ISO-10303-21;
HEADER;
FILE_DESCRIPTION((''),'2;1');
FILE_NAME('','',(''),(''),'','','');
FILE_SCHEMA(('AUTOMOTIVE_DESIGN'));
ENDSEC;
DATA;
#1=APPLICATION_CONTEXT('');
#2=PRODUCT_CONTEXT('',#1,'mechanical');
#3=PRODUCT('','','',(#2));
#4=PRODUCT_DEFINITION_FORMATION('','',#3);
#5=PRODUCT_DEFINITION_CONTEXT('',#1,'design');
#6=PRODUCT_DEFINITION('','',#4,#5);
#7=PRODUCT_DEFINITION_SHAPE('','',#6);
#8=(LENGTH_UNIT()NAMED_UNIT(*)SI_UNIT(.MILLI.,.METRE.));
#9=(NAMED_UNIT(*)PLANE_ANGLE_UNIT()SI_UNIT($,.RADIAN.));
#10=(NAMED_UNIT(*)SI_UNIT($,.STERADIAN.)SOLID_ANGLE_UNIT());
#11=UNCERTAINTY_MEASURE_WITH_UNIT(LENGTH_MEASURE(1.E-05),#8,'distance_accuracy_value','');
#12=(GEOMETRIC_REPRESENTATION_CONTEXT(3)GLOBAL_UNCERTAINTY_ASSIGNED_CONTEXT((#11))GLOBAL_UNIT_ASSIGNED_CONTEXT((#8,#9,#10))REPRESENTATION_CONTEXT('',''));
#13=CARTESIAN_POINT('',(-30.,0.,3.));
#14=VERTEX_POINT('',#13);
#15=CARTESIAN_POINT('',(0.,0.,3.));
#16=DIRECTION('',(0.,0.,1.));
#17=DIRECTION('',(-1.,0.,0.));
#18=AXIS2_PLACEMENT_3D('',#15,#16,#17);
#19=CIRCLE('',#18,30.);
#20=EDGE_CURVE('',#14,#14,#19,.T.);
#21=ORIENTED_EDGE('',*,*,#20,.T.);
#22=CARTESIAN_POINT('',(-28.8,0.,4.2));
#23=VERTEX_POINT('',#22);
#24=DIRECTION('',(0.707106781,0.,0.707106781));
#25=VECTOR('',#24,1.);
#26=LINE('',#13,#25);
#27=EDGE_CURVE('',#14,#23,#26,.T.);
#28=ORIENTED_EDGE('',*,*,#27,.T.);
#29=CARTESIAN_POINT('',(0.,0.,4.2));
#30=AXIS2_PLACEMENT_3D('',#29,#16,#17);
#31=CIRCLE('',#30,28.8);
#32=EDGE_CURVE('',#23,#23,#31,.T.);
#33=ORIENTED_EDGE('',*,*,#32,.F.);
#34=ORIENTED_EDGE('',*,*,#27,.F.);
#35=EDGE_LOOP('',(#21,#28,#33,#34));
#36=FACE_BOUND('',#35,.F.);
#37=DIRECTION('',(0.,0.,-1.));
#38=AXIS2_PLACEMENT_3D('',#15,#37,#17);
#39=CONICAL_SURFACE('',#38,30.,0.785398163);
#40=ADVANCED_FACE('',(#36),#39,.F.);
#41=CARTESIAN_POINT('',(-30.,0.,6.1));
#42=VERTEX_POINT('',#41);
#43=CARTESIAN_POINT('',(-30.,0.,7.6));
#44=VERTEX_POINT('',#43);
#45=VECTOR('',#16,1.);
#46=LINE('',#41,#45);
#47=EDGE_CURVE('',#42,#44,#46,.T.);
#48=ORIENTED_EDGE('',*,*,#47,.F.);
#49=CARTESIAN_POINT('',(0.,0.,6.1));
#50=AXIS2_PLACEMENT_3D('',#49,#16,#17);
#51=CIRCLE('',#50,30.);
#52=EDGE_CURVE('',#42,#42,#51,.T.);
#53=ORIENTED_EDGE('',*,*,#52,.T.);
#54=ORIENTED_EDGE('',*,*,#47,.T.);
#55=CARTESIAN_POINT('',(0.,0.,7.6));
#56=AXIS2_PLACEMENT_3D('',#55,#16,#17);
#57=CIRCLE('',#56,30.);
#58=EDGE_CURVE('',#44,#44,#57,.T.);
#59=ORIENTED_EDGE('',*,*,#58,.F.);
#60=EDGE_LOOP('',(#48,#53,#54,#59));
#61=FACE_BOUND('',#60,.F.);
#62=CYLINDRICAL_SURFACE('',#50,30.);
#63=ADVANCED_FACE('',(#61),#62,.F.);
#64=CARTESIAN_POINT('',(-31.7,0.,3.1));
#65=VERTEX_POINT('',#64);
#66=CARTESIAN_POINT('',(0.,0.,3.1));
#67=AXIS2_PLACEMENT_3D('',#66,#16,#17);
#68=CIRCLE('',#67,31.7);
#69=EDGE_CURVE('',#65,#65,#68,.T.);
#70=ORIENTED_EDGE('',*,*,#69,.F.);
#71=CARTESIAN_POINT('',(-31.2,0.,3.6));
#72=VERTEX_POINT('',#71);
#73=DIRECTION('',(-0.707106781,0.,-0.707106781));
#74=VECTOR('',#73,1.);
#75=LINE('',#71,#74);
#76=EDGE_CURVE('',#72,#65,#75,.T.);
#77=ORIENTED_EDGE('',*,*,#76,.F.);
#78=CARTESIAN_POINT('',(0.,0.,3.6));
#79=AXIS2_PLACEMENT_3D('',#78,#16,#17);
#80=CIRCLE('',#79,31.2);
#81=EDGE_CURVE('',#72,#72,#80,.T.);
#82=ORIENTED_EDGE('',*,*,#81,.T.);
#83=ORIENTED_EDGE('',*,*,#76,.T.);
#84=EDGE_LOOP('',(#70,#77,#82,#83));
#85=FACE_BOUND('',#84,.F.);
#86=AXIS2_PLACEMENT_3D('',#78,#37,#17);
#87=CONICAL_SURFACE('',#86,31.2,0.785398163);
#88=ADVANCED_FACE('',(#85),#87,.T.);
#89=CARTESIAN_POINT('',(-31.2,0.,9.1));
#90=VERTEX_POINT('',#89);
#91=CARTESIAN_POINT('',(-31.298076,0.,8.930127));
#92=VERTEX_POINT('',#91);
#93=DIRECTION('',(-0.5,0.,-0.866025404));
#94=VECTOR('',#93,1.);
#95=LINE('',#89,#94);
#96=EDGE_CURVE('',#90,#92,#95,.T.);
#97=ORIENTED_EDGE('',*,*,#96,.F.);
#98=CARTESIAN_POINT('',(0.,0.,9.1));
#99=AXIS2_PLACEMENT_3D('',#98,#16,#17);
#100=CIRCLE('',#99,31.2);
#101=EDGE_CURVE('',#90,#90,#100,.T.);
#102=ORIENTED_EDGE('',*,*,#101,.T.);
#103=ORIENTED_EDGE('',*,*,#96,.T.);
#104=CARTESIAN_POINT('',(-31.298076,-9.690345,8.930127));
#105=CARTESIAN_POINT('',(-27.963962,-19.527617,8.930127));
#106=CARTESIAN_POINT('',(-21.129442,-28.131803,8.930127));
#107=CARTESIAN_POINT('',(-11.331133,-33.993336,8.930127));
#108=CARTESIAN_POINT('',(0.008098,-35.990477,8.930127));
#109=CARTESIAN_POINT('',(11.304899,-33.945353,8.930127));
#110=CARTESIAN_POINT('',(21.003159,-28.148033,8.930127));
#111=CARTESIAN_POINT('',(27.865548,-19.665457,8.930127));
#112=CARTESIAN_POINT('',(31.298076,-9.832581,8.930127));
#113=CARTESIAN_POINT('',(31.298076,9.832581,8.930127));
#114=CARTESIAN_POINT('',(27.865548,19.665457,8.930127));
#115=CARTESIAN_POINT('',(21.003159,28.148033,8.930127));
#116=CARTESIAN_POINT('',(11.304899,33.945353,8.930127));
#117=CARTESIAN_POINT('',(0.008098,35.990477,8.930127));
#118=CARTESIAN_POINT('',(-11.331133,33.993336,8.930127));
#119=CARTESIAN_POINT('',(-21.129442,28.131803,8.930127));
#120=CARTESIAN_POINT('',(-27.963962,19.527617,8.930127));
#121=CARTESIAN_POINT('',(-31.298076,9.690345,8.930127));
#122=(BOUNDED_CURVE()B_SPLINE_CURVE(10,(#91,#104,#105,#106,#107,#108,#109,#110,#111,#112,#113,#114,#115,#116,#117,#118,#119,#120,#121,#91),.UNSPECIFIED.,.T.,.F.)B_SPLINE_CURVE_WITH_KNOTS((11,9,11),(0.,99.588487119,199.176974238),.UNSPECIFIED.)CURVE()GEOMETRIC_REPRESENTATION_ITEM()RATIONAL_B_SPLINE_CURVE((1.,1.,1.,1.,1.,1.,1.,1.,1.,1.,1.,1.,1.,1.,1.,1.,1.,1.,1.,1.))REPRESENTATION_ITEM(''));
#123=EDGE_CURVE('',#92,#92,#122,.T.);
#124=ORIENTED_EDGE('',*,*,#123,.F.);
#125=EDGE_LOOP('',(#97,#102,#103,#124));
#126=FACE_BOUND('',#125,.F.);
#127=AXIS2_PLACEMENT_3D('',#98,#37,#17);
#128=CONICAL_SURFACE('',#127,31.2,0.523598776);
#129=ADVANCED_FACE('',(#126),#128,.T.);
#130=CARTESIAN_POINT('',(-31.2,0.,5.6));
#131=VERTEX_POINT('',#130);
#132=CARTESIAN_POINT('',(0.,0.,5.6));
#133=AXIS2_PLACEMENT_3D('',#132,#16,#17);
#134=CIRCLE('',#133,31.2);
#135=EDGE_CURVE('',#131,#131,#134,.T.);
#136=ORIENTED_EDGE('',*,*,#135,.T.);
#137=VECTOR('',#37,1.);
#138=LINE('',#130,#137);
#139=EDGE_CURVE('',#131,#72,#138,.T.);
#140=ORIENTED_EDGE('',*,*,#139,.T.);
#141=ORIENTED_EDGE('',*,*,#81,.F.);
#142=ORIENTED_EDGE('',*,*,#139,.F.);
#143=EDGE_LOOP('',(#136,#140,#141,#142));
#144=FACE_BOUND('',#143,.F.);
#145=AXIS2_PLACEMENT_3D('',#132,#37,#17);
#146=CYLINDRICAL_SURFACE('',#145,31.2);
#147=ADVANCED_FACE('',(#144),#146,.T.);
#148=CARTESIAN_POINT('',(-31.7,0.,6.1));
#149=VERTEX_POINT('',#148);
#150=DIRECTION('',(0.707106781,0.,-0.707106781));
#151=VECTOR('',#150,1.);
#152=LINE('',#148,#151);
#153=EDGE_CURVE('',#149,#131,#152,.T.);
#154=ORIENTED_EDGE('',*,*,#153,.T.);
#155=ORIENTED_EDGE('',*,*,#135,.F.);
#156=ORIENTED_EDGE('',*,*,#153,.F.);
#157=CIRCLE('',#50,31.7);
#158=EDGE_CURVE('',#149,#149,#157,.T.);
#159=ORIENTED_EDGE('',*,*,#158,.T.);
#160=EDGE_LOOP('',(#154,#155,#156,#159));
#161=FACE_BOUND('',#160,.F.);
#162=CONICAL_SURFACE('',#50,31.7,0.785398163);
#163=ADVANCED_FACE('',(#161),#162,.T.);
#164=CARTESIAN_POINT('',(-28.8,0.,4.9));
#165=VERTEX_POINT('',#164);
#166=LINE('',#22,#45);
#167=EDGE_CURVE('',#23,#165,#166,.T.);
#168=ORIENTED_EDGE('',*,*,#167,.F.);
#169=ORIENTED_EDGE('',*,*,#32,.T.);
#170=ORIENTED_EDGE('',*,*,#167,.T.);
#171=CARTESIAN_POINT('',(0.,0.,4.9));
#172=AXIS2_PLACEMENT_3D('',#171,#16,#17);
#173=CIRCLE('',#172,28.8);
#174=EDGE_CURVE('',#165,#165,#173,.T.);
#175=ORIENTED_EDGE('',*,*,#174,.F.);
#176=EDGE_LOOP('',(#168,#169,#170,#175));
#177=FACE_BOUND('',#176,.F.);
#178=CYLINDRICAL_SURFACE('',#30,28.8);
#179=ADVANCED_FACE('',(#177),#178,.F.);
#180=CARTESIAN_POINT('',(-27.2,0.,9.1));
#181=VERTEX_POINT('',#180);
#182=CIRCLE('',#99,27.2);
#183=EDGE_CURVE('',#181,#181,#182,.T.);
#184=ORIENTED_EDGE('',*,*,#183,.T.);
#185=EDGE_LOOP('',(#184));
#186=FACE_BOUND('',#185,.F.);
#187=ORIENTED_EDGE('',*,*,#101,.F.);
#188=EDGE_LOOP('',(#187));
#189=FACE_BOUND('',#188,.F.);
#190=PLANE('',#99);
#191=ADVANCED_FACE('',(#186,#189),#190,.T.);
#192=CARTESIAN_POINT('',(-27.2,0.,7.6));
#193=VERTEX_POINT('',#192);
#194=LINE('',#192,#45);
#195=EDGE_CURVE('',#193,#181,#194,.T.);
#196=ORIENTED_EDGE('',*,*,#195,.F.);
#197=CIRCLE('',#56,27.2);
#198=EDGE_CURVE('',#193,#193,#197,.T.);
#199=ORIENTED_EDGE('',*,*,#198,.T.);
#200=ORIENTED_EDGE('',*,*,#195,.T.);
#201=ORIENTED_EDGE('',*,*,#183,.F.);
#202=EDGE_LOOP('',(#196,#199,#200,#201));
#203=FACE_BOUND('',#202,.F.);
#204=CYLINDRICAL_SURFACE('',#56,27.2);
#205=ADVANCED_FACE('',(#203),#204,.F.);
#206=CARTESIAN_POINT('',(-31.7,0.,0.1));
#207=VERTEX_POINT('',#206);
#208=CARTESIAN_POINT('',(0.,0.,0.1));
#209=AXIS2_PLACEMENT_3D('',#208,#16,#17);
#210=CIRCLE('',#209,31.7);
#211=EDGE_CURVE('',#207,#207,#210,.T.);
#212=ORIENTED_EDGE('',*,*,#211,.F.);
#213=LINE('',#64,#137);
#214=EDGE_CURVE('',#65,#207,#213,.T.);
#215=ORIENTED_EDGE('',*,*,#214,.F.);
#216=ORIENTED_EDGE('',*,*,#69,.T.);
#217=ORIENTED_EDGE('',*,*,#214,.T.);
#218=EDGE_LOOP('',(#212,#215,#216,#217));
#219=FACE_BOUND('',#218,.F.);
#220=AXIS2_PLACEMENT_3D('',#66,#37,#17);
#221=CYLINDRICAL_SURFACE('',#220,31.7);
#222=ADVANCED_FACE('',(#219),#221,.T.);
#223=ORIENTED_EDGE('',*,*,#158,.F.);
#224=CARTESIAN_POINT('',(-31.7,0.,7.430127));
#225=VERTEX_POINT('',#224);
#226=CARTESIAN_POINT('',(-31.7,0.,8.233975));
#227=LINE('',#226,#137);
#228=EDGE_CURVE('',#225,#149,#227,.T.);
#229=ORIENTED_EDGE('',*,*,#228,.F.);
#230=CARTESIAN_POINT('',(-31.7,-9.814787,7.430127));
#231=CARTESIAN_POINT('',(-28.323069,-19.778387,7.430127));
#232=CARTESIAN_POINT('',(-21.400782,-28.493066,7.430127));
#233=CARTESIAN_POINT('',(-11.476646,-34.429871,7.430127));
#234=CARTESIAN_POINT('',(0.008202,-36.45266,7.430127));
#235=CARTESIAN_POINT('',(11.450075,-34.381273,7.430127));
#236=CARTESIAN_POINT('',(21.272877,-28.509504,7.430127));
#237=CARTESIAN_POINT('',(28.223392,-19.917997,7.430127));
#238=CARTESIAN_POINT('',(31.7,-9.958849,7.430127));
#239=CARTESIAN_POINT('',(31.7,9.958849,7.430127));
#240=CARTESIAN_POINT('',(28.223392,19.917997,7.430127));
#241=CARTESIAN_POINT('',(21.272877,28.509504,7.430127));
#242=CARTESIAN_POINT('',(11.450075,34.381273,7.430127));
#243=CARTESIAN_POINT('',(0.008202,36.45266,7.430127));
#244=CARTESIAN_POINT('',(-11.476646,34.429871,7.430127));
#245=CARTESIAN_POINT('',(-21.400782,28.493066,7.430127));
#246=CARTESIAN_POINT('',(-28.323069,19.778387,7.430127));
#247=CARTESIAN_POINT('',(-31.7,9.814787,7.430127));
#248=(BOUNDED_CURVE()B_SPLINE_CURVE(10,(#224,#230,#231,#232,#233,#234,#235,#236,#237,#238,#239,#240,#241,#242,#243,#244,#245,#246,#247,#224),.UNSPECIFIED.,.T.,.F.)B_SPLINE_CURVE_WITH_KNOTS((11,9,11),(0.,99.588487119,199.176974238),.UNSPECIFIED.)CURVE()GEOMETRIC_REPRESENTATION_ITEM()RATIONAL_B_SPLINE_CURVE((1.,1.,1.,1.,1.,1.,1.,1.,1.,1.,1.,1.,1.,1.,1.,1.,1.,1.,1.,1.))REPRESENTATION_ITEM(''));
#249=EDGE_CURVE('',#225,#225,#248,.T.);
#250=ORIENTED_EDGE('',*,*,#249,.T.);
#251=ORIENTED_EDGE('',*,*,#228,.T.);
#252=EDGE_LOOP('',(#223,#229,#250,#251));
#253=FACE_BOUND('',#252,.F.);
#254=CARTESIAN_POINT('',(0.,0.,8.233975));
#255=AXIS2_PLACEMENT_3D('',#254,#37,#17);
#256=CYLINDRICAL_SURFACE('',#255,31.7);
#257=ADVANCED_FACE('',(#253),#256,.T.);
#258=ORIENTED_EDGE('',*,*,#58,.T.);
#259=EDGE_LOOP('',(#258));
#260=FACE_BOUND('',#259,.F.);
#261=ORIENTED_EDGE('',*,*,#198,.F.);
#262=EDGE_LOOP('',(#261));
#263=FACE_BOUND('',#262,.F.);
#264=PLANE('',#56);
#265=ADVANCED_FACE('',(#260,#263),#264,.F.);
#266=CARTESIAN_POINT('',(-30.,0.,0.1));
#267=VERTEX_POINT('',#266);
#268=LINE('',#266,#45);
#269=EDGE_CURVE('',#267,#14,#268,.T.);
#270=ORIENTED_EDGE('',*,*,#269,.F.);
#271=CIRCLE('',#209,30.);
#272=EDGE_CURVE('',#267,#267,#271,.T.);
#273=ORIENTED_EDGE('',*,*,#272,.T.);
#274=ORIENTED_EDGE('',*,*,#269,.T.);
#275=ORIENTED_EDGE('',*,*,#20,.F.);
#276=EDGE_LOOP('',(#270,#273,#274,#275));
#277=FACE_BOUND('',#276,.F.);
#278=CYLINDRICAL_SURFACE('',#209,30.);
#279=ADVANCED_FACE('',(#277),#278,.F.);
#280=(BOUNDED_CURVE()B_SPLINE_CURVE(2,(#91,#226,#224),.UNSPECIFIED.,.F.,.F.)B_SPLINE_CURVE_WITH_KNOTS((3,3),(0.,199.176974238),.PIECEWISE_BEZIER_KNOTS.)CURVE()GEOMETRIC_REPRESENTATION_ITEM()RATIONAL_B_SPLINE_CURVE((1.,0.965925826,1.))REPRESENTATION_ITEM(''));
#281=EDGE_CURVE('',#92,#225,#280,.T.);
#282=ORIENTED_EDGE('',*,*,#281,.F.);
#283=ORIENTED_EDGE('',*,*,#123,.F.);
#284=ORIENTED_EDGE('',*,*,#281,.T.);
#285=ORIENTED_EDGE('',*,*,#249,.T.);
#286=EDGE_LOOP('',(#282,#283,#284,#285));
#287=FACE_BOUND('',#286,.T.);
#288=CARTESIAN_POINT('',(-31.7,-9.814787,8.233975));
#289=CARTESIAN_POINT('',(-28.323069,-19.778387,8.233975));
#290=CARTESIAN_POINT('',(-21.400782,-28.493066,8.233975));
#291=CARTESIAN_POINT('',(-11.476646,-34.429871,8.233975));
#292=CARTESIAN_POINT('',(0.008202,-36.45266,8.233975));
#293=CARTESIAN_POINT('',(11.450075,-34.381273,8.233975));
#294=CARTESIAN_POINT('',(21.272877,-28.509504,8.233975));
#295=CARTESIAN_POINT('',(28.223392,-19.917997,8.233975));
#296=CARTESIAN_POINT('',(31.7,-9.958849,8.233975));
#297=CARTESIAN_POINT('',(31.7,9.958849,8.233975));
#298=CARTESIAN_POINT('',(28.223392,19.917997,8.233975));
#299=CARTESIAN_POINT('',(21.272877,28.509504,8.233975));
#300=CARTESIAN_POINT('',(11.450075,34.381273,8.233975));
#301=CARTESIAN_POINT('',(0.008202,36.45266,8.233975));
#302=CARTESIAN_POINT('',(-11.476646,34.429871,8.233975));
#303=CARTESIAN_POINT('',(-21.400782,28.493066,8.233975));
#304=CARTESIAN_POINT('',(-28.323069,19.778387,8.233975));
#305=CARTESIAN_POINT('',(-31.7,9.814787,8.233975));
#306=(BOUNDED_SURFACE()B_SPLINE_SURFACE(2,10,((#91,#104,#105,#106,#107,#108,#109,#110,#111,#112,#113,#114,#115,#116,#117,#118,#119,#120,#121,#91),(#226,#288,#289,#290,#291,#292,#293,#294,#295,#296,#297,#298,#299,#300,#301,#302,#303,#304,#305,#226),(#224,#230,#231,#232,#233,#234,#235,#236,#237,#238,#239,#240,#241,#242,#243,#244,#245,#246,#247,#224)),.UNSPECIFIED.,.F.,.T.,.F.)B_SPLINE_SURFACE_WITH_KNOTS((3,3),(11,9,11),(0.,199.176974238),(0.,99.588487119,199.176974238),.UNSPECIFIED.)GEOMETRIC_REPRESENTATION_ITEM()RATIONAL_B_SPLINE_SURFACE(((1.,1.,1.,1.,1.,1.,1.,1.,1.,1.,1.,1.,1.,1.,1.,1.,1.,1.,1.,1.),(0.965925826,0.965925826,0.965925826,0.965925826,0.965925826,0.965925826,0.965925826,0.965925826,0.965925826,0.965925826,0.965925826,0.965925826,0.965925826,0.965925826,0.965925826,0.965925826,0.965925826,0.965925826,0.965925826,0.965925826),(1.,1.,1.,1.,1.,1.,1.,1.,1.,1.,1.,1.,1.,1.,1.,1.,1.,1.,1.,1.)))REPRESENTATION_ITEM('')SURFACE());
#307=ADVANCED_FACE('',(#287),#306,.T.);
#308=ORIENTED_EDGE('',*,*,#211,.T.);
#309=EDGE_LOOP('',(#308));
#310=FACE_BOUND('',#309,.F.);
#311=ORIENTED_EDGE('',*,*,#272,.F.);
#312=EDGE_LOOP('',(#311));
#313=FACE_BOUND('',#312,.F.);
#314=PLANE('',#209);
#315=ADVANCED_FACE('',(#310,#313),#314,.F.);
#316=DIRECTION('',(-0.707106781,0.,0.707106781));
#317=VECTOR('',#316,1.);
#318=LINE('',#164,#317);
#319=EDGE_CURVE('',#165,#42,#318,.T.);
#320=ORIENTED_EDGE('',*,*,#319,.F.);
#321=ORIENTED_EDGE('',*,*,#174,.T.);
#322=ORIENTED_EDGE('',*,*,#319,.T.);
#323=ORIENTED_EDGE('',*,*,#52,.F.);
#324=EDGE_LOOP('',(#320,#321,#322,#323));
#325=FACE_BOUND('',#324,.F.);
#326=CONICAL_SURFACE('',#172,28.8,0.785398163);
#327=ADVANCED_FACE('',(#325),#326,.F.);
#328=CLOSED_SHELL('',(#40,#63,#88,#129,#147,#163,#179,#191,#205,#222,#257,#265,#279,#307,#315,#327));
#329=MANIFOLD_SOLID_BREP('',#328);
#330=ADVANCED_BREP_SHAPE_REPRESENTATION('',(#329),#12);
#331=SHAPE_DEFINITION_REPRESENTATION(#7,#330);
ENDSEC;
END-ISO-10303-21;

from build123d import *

# Parameters (mm, degrees)
F2_R = 3


# Not quite as in the source:
# - a feature names something its author has since deleted; it is built from what else it names


with BuildPart() as f1:
    # F0 (on Front) → F1 (revolve)
    with BuildSketch(Plane.XZ):
        Polygon((-30, 0.1), (-30, 3), (-28.8, 4.2), (-28.8, 4.9), (-30, 6.1), (-30, 7.6), (-27.2, 7.6), (-27.2, 9.1), (-31.2, 9.1), (-31.7, 8.2339745962), (-31.7, 6.1), (-31.2, 5.6), (-31.2, 3.6), (-31.7, 3.1), (-31.7, 0.1), align=None)
    revolve(axis=Axis((0, 0, 8.878365159), (0, 0, 1)))

    # F2
    f2_edges = [f1.edges().sort_by_distance(p)[0] for p in [
        (31.7, 0, 8.233975),
    ]]
    fillet(f2_edges, radius=F2_R)


solid = f1.part
